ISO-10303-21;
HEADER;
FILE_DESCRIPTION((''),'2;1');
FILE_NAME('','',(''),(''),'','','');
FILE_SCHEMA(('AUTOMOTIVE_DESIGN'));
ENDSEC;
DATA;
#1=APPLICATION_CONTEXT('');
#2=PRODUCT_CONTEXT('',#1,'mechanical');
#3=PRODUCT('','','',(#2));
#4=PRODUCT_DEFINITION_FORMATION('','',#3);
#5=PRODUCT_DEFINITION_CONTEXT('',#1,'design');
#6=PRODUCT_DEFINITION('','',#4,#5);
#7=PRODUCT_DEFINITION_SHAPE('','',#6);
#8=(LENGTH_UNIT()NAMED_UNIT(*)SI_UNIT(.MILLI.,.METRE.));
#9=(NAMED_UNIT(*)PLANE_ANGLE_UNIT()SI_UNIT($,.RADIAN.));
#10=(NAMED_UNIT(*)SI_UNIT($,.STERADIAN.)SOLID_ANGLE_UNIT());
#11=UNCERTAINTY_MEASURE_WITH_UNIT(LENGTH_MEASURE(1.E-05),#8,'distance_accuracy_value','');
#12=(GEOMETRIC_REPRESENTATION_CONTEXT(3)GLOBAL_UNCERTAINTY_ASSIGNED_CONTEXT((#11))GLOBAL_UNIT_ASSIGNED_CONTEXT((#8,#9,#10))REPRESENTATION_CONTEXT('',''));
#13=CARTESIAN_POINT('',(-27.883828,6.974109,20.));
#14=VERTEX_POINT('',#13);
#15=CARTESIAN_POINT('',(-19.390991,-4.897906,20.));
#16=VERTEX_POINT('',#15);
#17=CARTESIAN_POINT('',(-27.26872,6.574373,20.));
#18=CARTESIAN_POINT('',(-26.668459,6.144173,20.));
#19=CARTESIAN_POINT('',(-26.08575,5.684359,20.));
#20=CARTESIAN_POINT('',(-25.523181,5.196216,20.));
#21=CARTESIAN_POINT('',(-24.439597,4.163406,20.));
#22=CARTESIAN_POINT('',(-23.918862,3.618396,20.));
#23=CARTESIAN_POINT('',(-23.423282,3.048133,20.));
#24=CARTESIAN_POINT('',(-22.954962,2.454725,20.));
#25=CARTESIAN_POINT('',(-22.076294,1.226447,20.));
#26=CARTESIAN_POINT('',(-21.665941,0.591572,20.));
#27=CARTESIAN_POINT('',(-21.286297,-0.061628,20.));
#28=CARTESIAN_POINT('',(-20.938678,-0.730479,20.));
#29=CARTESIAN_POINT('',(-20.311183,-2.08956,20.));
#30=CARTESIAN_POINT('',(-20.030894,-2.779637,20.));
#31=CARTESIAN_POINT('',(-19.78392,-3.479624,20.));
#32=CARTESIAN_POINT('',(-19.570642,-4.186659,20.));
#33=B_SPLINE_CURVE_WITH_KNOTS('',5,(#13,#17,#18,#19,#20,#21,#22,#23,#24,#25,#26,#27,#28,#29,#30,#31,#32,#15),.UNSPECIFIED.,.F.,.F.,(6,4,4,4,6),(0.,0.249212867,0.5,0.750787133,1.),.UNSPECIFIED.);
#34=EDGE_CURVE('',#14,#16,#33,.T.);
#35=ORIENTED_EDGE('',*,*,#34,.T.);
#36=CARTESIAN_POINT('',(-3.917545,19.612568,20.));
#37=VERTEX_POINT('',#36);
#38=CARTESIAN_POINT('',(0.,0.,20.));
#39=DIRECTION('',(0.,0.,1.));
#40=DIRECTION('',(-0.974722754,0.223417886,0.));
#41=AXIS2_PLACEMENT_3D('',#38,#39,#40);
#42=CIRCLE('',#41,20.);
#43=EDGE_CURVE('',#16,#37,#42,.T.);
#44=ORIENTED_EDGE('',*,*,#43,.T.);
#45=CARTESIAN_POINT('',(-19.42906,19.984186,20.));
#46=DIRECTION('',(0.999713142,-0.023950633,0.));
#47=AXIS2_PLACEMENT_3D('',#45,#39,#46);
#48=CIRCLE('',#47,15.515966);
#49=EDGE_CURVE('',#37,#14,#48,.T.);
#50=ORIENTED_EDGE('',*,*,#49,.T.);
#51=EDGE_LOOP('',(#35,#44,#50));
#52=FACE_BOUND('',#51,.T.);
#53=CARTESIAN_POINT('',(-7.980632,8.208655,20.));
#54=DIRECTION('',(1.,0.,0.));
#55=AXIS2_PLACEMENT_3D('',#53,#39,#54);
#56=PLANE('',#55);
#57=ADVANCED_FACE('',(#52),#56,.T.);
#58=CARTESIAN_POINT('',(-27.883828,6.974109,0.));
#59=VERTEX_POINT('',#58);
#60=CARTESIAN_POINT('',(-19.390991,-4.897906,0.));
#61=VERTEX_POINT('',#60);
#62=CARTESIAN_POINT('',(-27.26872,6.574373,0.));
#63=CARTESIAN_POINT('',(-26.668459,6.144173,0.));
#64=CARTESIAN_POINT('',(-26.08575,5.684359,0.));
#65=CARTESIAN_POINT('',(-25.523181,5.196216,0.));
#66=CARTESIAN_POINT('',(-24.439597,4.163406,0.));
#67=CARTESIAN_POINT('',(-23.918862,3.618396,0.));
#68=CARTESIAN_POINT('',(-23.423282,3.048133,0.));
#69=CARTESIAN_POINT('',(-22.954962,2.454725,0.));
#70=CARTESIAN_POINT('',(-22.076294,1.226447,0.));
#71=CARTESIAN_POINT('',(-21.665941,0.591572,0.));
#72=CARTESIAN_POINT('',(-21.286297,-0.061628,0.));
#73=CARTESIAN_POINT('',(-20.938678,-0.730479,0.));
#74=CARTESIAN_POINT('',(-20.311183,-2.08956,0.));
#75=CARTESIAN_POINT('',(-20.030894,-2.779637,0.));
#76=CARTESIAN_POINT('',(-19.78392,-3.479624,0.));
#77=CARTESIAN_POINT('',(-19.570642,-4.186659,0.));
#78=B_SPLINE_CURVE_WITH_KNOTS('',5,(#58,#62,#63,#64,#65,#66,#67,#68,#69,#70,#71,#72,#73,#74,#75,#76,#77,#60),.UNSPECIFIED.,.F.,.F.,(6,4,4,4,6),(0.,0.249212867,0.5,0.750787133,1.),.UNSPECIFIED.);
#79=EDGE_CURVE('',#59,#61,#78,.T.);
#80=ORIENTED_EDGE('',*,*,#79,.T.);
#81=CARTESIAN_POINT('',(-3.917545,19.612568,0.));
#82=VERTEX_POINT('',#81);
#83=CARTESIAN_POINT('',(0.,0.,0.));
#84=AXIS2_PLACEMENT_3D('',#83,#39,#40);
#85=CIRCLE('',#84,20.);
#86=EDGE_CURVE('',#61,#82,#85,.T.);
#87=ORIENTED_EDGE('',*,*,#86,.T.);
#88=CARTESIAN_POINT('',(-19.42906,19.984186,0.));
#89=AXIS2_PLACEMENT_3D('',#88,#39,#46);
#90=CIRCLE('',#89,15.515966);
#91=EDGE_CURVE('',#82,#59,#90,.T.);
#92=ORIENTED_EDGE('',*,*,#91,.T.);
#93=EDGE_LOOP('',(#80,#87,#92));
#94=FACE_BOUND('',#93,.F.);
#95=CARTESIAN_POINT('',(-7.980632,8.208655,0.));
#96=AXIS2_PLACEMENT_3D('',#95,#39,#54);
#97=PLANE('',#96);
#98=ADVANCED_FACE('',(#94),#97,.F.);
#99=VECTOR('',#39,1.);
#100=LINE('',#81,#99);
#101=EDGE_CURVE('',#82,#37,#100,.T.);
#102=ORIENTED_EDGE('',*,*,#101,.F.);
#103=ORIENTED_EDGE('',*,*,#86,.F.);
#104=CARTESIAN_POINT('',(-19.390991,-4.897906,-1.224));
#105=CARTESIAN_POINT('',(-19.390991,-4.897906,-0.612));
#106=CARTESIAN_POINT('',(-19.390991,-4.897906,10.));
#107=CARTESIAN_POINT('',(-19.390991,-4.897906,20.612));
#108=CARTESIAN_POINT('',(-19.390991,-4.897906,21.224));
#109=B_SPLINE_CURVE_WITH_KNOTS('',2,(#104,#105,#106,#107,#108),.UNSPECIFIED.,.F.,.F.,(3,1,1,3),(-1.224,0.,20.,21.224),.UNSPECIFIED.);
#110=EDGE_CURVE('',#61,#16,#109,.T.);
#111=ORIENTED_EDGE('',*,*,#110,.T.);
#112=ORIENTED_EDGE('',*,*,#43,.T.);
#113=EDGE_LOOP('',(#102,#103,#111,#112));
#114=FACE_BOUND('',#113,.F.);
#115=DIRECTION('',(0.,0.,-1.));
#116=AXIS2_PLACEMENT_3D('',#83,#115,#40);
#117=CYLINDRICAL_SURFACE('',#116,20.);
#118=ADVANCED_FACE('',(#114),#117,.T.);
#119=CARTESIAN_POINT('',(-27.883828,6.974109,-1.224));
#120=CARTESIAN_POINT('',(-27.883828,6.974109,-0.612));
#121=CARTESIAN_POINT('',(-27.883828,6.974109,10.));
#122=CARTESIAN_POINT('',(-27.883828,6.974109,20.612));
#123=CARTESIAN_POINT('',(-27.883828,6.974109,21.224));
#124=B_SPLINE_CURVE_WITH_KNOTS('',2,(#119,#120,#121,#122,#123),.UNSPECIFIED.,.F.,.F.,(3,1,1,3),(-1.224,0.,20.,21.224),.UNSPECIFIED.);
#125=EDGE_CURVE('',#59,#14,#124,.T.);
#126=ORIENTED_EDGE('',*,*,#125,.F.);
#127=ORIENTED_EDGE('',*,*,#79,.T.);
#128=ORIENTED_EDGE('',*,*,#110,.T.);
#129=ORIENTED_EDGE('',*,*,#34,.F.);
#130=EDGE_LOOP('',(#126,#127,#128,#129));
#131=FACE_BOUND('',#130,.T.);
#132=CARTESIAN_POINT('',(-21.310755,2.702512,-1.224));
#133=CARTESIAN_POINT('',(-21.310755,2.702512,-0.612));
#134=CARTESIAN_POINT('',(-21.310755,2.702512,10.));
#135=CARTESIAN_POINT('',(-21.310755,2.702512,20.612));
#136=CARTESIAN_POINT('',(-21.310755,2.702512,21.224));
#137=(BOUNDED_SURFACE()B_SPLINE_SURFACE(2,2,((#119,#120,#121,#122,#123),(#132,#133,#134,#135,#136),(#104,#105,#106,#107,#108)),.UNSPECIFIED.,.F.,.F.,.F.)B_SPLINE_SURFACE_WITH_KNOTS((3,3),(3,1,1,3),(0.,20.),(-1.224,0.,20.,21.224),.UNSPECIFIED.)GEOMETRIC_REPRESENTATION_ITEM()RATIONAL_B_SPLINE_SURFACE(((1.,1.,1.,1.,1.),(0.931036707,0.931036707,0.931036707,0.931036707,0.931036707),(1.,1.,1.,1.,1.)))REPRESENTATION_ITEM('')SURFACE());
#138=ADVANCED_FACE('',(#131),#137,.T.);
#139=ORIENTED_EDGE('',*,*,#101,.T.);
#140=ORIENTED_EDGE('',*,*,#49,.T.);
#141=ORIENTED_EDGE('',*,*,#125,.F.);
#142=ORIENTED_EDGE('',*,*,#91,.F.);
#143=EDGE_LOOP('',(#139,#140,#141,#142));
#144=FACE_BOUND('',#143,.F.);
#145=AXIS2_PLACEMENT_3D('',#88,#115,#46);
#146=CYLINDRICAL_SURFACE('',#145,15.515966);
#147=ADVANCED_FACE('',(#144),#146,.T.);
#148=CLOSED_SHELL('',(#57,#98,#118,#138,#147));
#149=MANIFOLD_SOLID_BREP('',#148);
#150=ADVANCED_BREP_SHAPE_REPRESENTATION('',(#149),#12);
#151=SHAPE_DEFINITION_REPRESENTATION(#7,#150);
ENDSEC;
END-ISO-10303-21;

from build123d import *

# Parameters (mm, degrees)
F1_DEPTH = 20
F2_R     = 20


# Not quite as in the source:
# - the program builds the solid bodies; features that only make, move or delete a surface that nothing else refers to are left out


with BuildPart() as f1:
    # F0 (on Top) → F1 (new body)
    with BuildSketch(Plane.XY):
        with BuildLine():
            ThreePointArc((-3.9175447913, 19.6125684909), (-30.2449014117, 31.1090570268), (-19.494455089, 4.4683577278))
            ThreePointArc((-19.494455089, 4.4683577278), (13.9415642776, -14.3399018648), (-3.9175447913, 19.6125684909))
        make_face()
    extrude(amount=F1_DEPTH)

    # F2
    f2_edges = [f1.edges().sort_by_distance(p)[0] for p in [
        (-19.494455, 4.468358, 10),
    ]]
    fillet(f2_edges, radius=F2_R)


solid = f1.part
